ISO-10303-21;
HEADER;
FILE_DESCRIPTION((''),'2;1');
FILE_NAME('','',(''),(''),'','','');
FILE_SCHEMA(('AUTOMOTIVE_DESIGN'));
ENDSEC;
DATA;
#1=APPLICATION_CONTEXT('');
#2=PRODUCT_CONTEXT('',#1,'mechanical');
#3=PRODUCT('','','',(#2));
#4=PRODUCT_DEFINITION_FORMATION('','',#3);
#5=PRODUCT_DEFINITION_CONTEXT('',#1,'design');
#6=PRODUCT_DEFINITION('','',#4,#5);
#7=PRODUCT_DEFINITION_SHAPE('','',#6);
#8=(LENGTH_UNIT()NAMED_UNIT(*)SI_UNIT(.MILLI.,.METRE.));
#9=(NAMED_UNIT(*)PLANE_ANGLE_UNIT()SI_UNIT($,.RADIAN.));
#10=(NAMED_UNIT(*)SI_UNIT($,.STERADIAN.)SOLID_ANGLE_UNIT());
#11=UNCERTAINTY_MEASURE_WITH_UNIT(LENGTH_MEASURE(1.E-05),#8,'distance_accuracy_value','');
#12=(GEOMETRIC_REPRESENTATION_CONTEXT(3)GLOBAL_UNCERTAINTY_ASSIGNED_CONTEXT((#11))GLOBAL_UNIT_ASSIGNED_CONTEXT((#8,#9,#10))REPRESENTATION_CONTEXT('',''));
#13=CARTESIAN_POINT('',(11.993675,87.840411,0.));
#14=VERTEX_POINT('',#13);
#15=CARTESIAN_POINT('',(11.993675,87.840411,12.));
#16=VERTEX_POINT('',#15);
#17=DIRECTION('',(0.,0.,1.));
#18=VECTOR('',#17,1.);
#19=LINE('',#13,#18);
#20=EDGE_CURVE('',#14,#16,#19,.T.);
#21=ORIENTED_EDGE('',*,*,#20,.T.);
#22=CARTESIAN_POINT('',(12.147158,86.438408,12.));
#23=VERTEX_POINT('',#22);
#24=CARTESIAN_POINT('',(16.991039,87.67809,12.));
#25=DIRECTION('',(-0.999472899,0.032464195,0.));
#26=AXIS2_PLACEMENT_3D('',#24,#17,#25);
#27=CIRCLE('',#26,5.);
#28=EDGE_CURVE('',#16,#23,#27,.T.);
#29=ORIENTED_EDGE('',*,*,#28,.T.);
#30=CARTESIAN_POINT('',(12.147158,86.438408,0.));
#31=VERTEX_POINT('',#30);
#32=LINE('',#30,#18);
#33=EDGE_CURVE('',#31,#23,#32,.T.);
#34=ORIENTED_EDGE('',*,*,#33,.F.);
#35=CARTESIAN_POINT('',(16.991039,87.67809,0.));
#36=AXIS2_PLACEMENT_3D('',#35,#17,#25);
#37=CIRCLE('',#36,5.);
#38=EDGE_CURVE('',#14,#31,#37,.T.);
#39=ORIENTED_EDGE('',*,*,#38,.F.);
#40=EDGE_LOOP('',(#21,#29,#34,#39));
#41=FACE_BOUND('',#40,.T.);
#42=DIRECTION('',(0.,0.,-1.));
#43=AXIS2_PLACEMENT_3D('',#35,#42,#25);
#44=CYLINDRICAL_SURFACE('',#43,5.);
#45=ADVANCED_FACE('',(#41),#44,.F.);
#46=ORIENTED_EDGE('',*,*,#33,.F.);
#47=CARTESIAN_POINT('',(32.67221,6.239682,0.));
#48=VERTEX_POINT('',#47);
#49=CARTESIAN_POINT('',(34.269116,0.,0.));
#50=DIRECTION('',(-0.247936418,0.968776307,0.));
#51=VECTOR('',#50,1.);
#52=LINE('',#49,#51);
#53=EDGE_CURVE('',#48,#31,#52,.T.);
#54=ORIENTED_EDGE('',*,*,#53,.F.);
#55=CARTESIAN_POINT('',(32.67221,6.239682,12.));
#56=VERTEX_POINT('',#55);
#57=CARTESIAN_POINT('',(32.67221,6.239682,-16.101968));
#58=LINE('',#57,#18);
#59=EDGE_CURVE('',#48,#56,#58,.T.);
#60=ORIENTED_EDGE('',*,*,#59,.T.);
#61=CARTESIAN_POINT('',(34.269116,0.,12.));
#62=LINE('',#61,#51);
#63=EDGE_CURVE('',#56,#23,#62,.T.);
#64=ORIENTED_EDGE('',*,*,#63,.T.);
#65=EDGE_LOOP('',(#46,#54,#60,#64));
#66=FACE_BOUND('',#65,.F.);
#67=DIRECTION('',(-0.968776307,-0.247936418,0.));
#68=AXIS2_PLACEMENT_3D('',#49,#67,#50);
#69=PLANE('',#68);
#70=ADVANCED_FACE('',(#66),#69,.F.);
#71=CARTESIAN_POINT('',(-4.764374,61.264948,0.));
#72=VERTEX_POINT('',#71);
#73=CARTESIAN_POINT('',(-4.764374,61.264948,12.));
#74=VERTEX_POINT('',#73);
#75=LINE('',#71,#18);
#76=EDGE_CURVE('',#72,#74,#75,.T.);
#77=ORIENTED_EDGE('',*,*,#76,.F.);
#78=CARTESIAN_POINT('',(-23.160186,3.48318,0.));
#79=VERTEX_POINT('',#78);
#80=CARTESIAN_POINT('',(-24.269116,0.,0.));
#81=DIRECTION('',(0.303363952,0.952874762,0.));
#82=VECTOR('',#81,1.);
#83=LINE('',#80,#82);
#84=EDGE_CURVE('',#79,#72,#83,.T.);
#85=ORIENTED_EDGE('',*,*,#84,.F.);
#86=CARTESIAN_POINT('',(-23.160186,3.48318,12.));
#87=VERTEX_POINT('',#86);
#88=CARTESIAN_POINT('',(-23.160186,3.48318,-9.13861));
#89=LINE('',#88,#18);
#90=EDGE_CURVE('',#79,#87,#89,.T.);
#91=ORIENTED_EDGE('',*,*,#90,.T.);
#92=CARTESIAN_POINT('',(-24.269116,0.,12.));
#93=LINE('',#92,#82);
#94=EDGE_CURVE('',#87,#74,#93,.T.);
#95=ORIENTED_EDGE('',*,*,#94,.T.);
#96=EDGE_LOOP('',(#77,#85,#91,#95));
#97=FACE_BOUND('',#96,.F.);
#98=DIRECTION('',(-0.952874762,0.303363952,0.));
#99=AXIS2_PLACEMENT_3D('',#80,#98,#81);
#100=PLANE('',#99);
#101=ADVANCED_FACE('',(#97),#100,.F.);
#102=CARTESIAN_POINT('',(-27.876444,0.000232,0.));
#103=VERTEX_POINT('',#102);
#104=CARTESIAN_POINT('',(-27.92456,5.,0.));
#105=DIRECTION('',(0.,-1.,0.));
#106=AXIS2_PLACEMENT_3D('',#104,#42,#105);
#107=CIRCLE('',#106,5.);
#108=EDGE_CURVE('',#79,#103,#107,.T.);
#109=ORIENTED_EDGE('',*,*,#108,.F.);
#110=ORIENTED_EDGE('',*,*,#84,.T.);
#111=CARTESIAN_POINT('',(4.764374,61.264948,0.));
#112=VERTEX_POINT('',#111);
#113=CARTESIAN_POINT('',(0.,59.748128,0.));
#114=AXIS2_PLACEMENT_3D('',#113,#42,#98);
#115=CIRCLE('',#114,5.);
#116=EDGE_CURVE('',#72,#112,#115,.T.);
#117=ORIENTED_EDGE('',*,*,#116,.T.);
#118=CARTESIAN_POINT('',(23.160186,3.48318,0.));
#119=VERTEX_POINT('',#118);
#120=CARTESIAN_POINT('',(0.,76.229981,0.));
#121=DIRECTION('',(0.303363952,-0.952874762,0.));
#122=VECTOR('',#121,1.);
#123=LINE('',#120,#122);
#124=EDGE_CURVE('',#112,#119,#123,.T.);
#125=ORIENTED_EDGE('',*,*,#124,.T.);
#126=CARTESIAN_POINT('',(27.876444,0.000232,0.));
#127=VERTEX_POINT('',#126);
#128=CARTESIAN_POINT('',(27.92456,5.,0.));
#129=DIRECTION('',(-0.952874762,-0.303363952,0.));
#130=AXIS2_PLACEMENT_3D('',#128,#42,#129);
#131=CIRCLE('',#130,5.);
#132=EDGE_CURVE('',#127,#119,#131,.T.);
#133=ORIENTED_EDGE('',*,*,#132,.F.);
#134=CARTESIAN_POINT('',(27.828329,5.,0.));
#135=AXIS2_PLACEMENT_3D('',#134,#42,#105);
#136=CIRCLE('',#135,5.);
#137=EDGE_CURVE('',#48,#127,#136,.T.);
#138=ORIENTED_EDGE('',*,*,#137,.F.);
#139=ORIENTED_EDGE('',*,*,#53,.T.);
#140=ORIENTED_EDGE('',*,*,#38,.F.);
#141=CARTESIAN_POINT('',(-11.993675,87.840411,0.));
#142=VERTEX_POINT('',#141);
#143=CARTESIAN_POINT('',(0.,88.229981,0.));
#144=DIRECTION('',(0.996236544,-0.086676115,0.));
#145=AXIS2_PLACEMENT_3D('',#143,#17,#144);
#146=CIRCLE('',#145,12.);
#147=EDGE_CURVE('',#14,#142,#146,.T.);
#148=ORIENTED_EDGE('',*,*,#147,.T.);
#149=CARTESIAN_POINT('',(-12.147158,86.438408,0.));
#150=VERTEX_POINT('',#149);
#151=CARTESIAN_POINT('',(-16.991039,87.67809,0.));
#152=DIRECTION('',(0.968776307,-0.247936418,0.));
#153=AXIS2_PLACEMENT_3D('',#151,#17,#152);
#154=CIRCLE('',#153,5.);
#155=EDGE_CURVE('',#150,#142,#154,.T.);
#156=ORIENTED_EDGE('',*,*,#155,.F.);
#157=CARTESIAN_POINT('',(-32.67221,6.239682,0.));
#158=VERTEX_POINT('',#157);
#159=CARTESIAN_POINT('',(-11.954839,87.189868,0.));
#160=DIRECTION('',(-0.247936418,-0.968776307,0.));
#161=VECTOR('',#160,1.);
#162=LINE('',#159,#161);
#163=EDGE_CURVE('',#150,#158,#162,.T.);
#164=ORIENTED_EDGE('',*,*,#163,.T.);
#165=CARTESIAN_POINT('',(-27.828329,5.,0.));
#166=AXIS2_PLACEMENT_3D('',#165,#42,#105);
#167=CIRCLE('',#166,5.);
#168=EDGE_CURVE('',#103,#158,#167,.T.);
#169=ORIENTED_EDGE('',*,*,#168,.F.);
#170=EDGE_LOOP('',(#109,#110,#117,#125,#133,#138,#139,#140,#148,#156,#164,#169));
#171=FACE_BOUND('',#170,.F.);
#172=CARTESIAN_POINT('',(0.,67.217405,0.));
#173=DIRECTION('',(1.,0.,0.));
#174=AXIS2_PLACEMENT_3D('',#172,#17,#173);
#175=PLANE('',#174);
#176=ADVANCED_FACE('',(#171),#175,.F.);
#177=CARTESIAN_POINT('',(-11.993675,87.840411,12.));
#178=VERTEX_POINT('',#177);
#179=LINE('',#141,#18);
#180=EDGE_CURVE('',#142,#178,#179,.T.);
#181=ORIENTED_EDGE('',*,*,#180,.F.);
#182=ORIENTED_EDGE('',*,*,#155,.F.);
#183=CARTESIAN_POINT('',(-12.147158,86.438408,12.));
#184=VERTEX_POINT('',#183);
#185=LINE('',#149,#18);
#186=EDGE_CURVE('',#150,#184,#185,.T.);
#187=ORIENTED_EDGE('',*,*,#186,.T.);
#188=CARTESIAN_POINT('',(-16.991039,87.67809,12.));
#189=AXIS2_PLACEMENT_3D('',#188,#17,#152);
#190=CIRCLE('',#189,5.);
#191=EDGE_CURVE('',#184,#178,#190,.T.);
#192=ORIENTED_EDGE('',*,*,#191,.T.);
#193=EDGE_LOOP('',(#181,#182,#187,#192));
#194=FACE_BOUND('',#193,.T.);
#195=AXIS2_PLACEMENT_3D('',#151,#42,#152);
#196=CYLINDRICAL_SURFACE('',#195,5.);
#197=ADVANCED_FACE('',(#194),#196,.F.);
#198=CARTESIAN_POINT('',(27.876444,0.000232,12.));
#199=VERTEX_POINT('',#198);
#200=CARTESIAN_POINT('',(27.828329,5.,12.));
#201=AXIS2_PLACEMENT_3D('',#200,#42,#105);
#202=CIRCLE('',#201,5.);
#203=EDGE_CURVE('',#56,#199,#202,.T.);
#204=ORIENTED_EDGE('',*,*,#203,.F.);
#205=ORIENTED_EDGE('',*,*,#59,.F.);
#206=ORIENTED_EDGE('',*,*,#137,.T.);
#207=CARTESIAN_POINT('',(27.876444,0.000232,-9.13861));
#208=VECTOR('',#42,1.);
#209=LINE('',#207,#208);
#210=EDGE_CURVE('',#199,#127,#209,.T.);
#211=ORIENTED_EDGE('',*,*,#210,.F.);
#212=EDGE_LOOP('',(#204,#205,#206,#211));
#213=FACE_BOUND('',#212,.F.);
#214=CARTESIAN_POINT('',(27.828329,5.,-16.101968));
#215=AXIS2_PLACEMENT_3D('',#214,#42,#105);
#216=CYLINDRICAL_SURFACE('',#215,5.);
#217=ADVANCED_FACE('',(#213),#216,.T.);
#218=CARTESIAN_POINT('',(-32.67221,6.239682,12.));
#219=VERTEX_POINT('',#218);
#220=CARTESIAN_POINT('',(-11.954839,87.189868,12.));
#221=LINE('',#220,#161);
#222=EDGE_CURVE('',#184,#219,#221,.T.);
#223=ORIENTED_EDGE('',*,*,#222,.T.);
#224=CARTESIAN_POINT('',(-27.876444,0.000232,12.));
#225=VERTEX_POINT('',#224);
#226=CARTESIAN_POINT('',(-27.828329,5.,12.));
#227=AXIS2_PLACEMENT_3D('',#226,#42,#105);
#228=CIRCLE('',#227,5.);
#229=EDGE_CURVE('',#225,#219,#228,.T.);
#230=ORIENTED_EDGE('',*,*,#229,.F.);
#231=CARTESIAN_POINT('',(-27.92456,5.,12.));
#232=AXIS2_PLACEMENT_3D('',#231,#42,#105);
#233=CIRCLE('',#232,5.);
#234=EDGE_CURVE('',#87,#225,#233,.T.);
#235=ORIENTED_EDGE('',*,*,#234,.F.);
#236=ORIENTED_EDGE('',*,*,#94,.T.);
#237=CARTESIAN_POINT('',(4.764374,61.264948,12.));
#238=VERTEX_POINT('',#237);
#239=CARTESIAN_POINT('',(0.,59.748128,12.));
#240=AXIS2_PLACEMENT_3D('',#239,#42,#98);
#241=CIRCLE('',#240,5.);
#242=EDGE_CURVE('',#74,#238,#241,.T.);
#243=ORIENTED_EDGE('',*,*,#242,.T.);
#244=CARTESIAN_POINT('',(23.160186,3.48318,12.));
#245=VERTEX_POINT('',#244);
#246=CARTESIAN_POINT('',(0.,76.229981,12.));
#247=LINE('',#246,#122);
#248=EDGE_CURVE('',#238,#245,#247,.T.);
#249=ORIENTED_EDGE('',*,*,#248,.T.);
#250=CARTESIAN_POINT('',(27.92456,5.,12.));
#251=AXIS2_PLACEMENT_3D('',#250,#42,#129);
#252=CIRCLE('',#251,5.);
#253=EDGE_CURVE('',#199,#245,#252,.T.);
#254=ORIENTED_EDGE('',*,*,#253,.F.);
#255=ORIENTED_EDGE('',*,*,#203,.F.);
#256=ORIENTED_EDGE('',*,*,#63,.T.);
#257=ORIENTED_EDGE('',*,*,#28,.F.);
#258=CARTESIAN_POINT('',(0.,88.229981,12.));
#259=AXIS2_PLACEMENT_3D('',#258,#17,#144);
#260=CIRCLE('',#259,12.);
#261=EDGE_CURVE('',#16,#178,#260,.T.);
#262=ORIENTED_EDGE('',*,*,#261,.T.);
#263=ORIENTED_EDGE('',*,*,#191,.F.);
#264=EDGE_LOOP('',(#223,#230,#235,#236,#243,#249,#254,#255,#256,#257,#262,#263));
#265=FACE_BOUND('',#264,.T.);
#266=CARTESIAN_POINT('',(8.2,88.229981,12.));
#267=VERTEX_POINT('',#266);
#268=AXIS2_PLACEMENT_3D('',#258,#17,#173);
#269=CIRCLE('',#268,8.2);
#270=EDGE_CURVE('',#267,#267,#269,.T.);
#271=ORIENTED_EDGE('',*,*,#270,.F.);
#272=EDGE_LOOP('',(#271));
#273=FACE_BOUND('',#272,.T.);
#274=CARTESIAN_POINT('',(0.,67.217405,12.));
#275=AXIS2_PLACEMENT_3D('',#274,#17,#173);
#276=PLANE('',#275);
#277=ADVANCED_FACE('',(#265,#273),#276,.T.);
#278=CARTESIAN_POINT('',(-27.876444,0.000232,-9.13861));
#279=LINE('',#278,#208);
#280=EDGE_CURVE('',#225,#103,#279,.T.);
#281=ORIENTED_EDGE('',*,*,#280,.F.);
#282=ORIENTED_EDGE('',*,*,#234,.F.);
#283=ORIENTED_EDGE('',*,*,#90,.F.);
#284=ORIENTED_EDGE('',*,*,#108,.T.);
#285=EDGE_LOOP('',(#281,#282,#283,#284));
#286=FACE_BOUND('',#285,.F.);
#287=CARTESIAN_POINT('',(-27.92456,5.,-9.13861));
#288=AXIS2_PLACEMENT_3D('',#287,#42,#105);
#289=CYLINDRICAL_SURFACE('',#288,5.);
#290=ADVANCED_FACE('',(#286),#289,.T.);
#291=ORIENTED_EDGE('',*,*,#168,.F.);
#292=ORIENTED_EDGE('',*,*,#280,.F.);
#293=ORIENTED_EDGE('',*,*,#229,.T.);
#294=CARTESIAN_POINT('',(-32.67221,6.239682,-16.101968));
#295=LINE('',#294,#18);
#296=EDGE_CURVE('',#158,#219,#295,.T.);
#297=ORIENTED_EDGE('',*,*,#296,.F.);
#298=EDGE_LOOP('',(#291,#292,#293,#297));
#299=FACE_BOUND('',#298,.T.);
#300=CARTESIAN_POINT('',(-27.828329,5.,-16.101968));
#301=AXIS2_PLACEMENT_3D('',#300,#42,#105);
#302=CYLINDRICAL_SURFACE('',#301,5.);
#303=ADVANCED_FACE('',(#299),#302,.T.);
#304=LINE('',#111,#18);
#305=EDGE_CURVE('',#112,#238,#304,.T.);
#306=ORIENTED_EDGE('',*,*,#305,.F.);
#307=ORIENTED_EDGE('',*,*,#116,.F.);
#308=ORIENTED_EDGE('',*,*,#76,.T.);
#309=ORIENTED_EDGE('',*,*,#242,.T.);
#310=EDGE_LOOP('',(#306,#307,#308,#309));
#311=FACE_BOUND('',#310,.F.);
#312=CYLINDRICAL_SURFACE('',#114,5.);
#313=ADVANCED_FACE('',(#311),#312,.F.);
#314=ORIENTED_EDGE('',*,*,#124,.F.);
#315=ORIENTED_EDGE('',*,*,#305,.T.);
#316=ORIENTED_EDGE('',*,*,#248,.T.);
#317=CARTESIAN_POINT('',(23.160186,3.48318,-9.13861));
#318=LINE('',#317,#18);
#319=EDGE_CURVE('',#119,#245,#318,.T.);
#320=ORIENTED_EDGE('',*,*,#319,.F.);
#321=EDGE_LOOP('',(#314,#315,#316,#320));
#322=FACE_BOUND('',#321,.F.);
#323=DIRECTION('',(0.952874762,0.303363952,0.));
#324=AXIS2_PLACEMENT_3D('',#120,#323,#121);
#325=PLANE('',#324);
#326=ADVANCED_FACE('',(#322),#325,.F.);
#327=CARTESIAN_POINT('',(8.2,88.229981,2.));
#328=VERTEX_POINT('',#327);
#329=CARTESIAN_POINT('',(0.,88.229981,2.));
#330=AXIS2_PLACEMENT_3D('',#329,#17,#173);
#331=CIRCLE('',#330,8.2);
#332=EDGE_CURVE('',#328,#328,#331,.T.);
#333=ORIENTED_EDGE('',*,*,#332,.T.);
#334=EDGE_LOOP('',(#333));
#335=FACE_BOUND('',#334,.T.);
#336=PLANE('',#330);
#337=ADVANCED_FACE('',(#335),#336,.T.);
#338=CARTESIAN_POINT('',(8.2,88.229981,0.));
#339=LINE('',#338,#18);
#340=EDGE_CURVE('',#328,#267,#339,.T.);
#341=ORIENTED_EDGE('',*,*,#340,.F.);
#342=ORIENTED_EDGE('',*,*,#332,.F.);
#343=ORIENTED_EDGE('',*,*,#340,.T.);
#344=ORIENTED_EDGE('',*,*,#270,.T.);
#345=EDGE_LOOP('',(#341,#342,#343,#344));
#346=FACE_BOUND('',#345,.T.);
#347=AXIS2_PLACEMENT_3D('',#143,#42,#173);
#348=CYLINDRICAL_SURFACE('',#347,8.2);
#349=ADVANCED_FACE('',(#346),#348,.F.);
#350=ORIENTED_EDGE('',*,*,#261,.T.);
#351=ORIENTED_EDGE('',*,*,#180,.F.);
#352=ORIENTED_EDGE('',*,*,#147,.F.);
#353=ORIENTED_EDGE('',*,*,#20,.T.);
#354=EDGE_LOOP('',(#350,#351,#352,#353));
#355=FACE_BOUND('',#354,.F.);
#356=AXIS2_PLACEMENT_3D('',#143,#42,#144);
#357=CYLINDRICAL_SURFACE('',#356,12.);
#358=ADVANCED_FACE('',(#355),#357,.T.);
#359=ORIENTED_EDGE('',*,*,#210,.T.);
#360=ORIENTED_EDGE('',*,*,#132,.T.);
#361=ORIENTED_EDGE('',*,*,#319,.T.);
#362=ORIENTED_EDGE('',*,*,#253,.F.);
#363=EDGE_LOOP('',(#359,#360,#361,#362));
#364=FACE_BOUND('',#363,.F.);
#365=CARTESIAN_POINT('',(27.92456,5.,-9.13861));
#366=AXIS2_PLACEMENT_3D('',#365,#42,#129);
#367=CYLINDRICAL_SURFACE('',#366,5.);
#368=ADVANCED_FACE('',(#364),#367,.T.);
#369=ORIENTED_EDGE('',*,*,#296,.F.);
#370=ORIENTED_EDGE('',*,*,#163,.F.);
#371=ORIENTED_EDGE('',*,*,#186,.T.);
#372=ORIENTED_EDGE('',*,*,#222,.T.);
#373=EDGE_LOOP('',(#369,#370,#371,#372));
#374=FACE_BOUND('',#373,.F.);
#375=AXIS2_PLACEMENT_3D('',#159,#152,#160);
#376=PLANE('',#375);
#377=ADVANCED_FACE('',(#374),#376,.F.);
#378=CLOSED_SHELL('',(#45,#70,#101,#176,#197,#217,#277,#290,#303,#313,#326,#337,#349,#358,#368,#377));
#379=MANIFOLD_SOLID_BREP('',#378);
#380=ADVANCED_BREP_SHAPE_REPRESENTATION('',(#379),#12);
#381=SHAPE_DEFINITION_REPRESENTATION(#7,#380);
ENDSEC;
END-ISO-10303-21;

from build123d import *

# Parameters (mm, degrees)
F0_R        = 8.2
F1_DEPTH    = 12
F2_DEPTH    = 2
F3_T1_DEPTH = 12
F3_T3_DEPTH = 30.2772195225
F3_T5_DEPTH = 44.2039362688


# Not quite as in the source:
# - a fillet or chamfer that OpenCascade refuses, or shapes differently, is made with other operations: its cross-section is extruded or revolved along the edge and cut away or added


with BuildPart() as f1:
    # F0 (on Top) → F1 (new body)
    with BuildSketch(Plane.XY):
        with BuildLine():
            Line((34.2691161265, 0), (11.9548385252, 87.1898676173))
            ThreePointArc((11.9548385252, 87.1898676173), (0, 100.2299809946), (-11.9548385252, 87.1898676173))
            Line((-11.9548385252, 87.1898676173), (-34.2691161265, 0))
            Line((-34.2691161265, 0), (-24.2691161265, 0))
            Line((-24.2691161265, 0), (0, 76.2299809946))
            Line((0, 76.2299809946), (24.2691161265, 0))
            Line((24.2691161265, 0), (34.2691161265, 0))
        make_face()
        with Locations((0, 88.2299809946)):
            Circle(F0_R, mode=Mode.SUBTRACT)
    extrude(amount=F1_DEPTH)

    # F0 (on Top) → F2 (join)
    with BuildSketch(Plane.XY):
        with Locations((0, 88.2299809946)):
            Circle(F0_R)
    extrude(amount=F2_DEPTH)

    # F3: fillet of radius 5 on 7 edges, made by hand

    # F3_s2 → F3_t1 (join)
    with BuildSketch(Plane.XY):
        with BuildLine():
            ThreePointArc((-4.7643738122, 61.2649479353), (0, 64.7481281774), (4.7643738122, 61.2649479353))
            Line((4.7643738122, 61.2649479353), (0, 76.2299809946))
            Line((0, 76.2299809946), (-4.7643738122, 61.2649479353))
        make_face()
        with BuildLine():
            ThreePointArc((11.9936747891, 87.8404106503), (12.0207340622, 87.1339702047), (12.1471577503, 86.4384075845))
            Line((12.1471577503, 86.4384075845), (11.9548385252, 87.1898676173))
            ThreePointArc((11.9548385252, 87.1898676173), (11.9786737183, 87.5148754431), (11.9936747891, 87.8404106503))
        make_face()
        with BuildLine():
            ThreePointArc((-12.1471577503, 86.4384075845), (-12.0207340622, 87.1339702047), (-11.9936747891, 87.8404106503))
            ThreePointArc((-11.9936747891, 87.8404106503), (-11.9786737183, 87.5148754431), (-11.9548385252, 87.1898676173))
            Line((-11.9548385252, 87.1898676173), (-12.1471577503, 86.4384075845))
        make_face()
    extrude(amount=F3_T1_DEPTH)

    # F3_s4 → F3_t3 (cut)
    with BuildSketch(Plane.XY.offset(-9.1386097613)):
        with BuildLine():
            ThreePointArc((-27.924560031, 0), (-24.9736363442, 0.96365891), (-23.1601862189, 3.4831802421))
            Line((-23.1601862189, 3.4831802421), (-24.2691161265, 0))
            Line((-24.2691161265, 0), (-27.924560031, 0))
        make_face()
        with BuildLine():
            ThreePointArc((23.1601862189, 3.4831802421), (24.9736363442, 0.96365891), (27.924560031, 0))
            Line((27.924560031, 0), (24.2691161265, 0))
            Line((24.2691161265, 0), (23.1601862189, 3.4831802421))
        make_face()
    extrude(amount=F3_T3_DEPTH, mode=Mode.SUBTRACT)

    # F3_s6 → F3_t5 (cut)
    with BuildSketch(Plane.XY.offset(-16.1019681344)):
        with BuildLine():
            ThreePointArc((-27.8283288728, 0), (-31.7779117903, 1.9339284455), (-32.6722104071, 6.239682089))
            Line((-32.6722104071, 6.239682089), (-34.2691161265, 0))
            Line((-34.2691161265, 0), (-27.8283288728, 0))
        make_face()
        with BuildLine():
            ThreePointArc((27.8283288728, 0), (31.7779117903, 1.9339284455), (32.6722104071, 6.239682089))
            Line((32.6722104071, 6.239682089), (34.2691161265, 0))
            Line((34.2691161265, 0), (27.8283288728, 0))
        make_face()
    extrude(amount=F3_T5_DEPTH, mode=Mode.SUBTRACT)


solid = f1.part
